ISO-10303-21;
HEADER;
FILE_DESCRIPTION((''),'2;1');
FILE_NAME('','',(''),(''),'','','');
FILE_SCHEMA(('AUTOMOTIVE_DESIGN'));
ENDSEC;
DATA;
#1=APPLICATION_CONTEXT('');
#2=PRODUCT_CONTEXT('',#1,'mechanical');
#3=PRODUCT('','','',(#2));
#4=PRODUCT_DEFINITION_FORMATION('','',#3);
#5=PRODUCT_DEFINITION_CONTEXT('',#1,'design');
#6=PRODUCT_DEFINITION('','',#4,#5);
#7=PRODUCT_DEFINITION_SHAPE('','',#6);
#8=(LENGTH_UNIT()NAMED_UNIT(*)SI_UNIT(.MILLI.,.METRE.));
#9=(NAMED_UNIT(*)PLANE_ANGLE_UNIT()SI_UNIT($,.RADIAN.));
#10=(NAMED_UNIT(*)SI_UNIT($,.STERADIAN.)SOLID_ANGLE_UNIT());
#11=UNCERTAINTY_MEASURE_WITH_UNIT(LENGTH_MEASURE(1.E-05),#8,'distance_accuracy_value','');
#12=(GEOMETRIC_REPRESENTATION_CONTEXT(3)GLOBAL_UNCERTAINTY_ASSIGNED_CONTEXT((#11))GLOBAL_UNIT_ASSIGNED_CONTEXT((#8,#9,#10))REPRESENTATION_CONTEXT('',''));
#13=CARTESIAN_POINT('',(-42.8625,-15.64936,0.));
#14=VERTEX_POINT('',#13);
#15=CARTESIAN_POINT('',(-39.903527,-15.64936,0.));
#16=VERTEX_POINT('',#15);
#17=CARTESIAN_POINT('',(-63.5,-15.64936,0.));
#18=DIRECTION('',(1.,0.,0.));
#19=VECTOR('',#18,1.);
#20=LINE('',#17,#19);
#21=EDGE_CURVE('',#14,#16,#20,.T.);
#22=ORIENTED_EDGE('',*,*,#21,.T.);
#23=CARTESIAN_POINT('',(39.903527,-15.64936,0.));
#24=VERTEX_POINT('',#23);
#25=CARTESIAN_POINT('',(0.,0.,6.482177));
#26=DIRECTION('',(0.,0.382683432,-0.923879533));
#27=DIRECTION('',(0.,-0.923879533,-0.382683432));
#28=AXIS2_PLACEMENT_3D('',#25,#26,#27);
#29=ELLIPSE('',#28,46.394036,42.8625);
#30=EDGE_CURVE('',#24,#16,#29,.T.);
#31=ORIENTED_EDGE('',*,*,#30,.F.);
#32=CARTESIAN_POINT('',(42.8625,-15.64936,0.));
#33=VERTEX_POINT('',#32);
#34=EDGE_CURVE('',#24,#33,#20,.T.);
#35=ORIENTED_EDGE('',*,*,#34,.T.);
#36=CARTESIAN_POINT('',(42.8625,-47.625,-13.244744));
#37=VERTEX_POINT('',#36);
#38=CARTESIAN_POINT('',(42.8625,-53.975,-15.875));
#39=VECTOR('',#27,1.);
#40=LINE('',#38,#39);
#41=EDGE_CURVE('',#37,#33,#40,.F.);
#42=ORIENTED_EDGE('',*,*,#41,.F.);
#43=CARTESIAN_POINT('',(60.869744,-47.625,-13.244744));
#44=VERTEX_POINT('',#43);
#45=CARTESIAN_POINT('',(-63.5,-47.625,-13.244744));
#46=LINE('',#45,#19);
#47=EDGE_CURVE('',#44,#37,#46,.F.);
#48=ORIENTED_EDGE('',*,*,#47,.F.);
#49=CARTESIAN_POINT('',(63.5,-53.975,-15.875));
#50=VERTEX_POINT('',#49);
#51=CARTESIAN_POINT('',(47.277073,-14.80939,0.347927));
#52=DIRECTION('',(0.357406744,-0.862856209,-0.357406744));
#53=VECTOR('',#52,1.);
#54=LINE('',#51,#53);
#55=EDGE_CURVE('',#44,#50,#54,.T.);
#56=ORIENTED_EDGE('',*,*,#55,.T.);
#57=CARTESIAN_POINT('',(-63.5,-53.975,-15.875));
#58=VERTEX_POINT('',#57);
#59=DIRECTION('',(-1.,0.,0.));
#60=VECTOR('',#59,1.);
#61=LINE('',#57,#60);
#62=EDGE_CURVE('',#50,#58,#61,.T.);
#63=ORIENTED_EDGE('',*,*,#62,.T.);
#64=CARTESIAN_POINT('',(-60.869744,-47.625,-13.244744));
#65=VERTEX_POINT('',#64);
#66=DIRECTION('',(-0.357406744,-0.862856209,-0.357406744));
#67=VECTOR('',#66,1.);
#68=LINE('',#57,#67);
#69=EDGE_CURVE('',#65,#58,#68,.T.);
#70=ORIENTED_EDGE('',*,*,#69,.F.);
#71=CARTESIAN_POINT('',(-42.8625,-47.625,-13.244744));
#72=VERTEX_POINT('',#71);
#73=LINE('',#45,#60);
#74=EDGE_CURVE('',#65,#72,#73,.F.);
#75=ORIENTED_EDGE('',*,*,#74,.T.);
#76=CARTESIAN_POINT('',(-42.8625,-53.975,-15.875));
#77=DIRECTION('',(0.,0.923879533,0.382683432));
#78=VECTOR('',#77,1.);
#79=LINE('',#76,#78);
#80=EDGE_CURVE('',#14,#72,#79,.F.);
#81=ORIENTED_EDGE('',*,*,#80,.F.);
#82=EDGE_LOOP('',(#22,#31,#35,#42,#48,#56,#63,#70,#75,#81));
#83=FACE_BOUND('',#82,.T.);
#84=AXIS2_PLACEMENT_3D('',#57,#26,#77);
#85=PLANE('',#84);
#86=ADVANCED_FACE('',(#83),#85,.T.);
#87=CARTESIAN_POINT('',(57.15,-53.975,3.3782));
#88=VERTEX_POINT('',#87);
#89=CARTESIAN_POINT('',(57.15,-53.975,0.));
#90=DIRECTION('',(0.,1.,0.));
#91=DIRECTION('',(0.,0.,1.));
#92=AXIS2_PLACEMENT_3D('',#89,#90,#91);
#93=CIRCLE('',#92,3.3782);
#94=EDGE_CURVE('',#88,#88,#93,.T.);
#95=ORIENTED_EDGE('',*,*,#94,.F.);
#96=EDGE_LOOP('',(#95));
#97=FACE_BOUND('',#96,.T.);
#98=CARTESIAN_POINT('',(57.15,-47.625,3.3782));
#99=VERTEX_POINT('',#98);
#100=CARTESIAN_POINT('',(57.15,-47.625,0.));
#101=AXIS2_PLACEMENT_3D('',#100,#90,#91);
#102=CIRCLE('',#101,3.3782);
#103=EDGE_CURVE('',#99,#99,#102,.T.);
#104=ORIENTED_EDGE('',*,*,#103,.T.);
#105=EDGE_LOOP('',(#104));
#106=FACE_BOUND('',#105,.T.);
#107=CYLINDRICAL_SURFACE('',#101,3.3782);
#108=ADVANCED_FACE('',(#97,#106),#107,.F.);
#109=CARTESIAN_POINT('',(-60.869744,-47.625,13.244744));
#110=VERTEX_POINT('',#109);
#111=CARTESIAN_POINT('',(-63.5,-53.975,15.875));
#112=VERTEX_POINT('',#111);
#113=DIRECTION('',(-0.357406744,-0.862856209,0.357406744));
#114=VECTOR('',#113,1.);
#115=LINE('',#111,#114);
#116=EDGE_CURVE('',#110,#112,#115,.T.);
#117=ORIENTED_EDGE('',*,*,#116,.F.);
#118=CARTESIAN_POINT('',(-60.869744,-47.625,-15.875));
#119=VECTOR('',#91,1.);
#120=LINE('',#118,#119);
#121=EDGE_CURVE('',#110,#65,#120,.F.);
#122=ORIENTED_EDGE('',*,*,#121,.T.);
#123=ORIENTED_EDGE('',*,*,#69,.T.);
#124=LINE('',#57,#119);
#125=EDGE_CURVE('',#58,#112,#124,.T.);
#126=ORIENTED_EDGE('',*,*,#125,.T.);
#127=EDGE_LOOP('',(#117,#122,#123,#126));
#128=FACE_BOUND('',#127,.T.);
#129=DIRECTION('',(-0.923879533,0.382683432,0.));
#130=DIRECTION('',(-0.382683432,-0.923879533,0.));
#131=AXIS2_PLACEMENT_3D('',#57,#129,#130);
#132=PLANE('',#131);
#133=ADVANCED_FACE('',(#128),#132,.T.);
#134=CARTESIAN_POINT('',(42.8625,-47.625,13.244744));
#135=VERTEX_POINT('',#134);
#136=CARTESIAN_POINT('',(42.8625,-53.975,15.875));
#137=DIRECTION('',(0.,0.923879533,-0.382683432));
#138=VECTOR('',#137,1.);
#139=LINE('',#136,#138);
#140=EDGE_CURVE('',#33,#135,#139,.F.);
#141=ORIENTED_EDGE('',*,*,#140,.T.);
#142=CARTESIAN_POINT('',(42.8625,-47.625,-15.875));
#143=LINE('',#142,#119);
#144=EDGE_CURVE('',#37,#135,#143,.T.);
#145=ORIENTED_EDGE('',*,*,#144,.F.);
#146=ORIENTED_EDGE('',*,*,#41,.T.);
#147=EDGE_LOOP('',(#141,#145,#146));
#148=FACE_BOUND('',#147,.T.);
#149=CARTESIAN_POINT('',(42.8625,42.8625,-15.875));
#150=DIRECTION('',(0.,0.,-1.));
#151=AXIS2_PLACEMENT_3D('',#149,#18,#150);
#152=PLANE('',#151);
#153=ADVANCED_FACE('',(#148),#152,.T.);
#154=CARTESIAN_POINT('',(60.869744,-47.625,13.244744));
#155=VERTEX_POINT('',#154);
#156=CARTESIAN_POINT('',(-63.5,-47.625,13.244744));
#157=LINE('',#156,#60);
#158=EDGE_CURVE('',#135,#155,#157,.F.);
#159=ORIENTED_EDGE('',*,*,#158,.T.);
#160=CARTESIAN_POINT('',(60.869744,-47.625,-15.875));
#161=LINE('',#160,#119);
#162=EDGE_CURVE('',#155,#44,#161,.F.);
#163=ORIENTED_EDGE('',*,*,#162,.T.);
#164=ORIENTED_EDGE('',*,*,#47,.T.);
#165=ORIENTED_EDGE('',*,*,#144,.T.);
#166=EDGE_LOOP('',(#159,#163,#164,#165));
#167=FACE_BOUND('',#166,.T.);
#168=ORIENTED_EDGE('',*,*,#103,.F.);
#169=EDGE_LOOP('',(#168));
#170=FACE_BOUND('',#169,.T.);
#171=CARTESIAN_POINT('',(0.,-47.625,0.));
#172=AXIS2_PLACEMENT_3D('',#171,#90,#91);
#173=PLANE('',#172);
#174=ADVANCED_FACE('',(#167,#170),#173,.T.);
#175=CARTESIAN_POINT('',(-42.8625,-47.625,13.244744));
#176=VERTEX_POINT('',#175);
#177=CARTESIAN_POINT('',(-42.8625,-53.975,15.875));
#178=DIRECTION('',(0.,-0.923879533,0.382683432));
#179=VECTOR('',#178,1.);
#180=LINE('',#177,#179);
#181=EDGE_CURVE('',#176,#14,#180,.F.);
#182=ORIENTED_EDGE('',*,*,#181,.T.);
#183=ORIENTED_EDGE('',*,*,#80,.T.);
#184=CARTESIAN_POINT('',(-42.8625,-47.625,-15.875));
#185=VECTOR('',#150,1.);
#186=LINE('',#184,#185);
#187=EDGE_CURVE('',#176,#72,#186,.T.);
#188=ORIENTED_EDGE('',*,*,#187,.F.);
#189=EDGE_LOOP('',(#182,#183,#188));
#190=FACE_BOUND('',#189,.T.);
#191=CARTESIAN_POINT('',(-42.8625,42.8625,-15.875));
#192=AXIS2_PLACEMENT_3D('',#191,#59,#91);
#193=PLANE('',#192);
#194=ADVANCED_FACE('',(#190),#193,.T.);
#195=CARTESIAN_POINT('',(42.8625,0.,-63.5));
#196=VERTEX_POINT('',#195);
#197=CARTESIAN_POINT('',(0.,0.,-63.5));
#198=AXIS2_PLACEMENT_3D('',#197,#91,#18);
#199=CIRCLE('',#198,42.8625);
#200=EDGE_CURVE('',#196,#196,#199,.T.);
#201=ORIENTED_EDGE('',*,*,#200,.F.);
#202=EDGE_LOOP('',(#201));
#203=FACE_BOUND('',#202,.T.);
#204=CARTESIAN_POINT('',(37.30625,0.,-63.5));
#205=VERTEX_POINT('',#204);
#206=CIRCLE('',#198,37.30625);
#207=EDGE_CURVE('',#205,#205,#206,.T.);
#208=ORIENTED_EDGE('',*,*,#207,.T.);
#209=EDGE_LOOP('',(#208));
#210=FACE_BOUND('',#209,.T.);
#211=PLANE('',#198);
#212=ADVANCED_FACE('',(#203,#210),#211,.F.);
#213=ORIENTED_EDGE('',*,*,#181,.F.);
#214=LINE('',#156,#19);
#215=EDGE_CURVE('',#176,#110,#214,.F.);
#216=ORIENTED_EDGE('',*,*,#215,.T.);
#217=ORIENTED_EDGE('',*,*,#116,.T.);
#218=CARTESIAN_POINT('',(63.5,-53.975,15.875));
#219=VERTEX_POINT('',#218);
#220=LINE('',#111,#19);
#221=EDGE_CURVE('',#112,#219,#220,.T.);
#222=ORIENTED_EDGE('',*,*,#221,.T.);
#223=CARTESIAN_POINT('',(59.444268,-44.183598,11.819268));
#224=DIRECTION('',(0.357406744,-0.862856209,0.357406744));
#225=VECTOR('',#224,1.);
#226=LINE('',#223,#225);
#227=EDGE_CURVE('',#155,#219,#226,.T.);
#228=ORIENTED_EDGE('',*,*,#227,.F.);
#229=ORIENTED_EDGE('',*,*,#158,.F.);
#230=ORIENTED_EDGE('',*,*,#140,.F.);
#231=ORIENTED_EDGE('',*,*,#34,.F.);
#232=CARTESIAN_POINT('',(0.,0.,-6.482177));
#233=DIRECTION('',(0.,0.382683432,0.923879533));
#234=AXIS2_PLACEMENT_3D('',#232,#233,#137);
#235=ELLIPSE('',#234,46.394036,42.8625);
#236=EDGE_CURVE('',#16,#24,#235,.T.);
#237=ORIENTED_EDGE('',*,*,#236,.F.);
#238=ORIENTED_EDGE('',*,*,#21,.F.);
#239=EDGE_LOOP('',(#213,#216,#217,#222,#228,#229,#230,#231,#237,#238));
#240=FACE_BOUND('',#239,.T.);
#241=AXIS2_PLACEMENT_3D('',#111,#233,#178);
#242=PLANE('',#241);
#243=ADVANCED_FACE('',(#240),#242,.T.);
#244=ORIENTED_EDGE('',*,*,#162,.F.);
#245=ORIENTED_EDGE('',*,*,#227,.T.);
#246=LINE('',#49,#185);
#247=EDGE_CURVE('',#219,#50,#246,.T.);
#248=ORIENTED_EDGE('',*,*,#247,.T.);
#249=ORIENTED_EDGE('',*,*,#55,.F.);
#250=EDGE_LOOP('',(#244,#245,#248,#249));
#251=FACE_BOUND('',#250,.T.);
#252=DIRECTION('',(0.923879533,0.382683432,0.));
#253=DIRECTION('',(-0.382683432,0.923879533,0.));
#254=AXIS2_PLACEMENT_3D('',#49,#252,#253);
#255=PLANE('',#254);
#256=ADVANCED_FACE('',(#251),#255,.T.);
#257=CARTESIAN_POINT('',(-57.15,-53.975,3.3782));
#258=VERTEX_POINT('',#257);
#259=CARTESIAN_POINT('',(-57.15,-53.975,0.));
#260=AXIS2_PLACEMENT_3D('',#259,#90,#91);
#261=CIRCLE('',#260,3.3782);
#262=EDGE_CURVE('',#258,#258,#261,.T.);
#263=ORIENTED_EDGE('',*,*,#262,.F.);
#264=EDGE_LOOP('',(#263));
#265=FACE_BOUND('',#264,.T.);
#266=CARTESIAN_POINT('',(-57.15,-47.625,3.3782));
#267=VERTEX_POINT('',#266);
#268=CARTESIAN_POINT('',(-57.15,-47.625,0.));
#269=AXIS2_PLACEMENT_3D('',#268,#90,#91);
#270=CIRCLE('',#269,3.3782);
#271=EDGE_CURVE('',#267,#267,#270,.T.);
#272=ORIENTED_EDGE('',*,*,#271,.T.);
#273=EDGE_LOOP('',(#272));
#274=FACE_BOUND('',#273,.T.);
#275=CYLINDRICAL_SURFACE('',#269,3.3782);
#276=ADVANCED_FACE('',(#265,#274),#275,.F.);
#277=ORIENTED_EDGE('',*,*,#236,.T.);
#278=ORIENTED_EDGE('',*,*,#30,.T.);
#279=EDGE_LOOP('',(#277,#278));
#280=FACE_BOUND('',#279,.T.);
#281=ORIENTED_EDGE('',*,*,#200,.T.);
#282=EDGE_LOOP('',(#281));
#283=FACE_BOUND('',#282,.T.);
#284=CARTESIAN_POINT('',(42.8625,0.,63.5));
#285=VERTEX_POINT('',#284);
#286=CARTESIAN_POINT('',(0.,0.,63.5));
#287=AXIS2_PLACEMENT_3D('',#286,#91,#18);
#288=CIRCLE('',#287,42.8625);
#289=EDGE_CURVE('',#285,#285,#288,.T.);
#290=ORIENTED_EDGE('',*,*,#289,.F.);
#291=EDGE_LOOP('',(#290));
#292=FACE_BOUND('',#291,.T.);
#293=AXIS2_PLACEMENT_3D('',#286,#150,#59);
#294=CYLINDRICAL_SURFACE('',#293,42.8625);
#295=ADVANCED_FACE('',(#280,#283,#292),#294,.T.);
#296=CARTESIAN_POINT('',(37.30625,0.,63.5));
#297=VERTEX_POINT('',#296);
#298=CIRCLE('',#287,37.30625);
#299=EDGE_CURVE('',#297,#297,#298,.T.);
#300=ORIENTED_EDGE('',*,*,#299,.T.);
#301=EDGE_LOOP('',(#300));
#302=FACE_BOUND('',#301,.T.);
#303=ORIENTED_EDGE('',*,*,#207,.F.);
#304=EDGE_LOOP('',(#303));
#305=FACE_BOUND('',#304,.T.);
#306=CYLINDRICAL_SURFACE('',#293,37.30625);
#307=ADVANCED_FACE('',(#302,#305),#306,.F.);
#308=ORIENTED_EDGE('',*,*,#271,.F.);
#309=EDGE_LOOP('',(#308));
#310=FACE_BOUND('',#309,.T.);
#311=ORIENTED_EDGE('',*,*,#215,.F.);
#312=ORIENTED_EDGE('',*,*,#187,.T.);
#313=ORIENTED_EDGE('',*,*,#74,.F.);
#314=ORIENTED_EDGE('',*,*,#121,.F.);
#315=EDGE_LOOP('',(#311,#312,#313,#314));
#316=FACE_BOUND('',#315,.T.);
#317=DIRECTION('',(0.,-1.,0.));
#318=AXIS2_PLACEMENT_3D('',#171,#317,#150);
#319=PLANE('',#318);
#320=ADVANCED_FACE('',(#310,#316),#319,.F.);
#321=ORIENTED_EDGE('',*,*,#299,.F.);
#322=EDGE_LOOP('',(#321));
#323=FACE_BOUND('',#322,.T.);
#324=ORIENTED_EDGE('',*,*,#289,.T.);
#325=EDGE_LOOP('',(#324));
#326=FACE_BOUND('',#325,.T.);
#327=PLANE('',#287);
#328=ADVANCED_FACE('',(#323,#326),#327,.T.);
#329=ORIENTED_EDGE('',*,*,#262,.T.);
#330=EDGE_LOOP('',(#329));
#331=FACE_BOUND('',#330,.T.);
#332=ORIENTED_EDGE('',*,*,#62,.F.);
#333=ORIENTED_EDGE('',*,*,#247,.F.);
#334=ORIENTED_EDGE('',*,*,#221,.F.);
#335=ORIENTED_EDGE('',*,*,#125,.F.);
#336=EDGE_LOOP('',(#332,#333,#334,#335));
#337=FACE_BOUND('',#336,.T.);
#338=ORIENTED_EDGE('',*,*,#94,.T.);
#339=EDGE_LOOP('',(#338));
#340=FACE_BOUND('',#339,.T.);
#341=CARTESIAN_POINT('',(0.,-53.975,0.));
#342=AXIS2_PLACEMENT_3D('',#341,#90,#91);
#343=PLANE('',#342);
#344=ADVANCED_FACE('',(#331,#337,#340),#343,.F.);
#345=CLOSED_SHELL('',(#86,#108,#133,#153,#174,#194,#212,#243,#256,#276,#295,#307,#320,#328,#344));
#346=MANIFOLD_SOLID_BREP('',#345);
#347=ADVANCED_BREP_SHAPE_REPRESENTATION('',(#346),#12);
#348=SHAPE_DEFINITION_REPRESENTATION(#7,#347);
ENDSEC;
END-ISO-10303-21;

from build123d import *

# Parameters (mm, degrees)
SKETCH1_R               = 42.8625
SKETCH1_R_2             = 37.30625
BOSS_EXTRUDE1_DEPTH     = 63.5
BOSS_EXTRUDE2_START     = 34.23763648
BOSS_EXTRUDE2_DEPTH     = 13.38736352
BOSS_EXTRUDE2_START_2   = -47.625
BOSS_EXTRUDE2_2_DEPTH   = 4.7624999
BOSS_EXTRUDE2_START_3   = -63.5
BOSS_EXTRUDE2_3_DEPTH   = 127
BOSS_EXTRUDE2_START_4   = -63.5000001
BOSS_EXTRUDE2_4_DEPTH   = 127.0000002
SKETCH3_W               = 20.6375
SKETCH3_H               = 31.75
CUT_EXTRUDE1_DEPTH      = 128.485244907
F_1_4_CLEARANCE_HOLE1_D = 6.7564


with BuildPart() as part:
    # Sketch1 → Boss-Extrude1 (new, symmetric)
    with BuildSketch(Plane.XY):
        Circle(SKETCH1_R)
        Circle(SKETCH1_R_2, mode=Mode.SUBTRACT)
    extrude(amount=BOSS_EXTRUDE1_DEPTH, both=True)

    # Boss-Extrude2: read off the stored shape, not the designer's step
    # Boss-Extrude2 outline → Boss-Extrude2 (add)
    with BuildSketch(Plane.YZ.offset(BOSS_EXTRUDE2_START)):
        Polygon((-53.975, 15.875), (-53.975, -15.875), (-15.649359697, 0), align=None)
    extrude(amount=BOSS_EXTRUDE2_DEPTH)



with BuildPart() as body_2:
    # Boss-Extrude2 2 outline → Boss-Extrude2 2 (new body)
    with BuildSketch(Plane.YZ.offset(BOSS_EXTRUDE2_START_2)):
        Polygon((-53.975, 15.875), (-53.975, -15.875), (-15.649359697, 0), align=None)
    extrude(amount=BOSS_EXTRUDE2_2_DEPTH)


with BuildPart() as part_1:
    add(part.part)

    add(body_2.part)  # Boss-Extrude2 3 merges body 2
    # Boss-Extrude2 3 outline → Boss-Extrude2 3 (add)
    with BuildSketch(Plane.YZ.offset(BOSS_EXTRUDE2_START_3)):
        Polygon((-53.975, 15.875), (-53.975, -15.875), (-15.649359697, 0), align=None)
    extrude(amount=BOSS_EXTRUDE2_3_DEPTH)

    # Boss-Extrude2 4 outline → Boss-Extrude2 4 (cut)
    with BuildSketch(Plane.XY.offset(BOSS_EXTRUDE2_START_4)):
        with BuildLine():
            Line((34.57970921, -14), (-34.57970921, -14))
            ThreePointArc((-34.57970921, -14), (0, -37.30625), (34.57970921, -14))
        make_face()
        Polygon((-47.625, -15.649359697), (-46.941812844, -14), (-63.5, -14), (-63.5, -53.975), align=None)
        Polygon((63.5, -14), (46.941812844, -14), (47.625, -15.649359697), (63.5, -53.975), align=None)
    extrude(amount=BOSS_EXTRUDE2_4_DEPTH, mode=Mode.SUBTRACT)

    # Sketch3 → Cut-Extrude1 (cut, through all)
    with BuildSketch(Plane(origin=(0, -47.625, 0), x_dir=(1, 0, 0), z_dir=(0, 1, 0))):
        with Locations((-53.18125, 0)):
            Rectangle(SKETCH3_W, SKETCH3_H)
        with Locations((53.18125, 0)):
            Rectangle(SKETCH3_W, SKETCH3_H)
    extrude(amount=CUT_EXTRUDE1_DEPTH, mode=Mode.SUBTRACT)

    # 1/4 Clearance Hole1 (through all)
    with Locations(Plane(origin=(0, -47.625, 0), x_dir=(1, 0, 0), z_dir=(0, 1, 0))):
        with Locations((-57.15, 0), (57.15, 0)):
            Hole(F_1_4_CLEARANCE_HOLE1_D / 2)


solid = part_1.part
